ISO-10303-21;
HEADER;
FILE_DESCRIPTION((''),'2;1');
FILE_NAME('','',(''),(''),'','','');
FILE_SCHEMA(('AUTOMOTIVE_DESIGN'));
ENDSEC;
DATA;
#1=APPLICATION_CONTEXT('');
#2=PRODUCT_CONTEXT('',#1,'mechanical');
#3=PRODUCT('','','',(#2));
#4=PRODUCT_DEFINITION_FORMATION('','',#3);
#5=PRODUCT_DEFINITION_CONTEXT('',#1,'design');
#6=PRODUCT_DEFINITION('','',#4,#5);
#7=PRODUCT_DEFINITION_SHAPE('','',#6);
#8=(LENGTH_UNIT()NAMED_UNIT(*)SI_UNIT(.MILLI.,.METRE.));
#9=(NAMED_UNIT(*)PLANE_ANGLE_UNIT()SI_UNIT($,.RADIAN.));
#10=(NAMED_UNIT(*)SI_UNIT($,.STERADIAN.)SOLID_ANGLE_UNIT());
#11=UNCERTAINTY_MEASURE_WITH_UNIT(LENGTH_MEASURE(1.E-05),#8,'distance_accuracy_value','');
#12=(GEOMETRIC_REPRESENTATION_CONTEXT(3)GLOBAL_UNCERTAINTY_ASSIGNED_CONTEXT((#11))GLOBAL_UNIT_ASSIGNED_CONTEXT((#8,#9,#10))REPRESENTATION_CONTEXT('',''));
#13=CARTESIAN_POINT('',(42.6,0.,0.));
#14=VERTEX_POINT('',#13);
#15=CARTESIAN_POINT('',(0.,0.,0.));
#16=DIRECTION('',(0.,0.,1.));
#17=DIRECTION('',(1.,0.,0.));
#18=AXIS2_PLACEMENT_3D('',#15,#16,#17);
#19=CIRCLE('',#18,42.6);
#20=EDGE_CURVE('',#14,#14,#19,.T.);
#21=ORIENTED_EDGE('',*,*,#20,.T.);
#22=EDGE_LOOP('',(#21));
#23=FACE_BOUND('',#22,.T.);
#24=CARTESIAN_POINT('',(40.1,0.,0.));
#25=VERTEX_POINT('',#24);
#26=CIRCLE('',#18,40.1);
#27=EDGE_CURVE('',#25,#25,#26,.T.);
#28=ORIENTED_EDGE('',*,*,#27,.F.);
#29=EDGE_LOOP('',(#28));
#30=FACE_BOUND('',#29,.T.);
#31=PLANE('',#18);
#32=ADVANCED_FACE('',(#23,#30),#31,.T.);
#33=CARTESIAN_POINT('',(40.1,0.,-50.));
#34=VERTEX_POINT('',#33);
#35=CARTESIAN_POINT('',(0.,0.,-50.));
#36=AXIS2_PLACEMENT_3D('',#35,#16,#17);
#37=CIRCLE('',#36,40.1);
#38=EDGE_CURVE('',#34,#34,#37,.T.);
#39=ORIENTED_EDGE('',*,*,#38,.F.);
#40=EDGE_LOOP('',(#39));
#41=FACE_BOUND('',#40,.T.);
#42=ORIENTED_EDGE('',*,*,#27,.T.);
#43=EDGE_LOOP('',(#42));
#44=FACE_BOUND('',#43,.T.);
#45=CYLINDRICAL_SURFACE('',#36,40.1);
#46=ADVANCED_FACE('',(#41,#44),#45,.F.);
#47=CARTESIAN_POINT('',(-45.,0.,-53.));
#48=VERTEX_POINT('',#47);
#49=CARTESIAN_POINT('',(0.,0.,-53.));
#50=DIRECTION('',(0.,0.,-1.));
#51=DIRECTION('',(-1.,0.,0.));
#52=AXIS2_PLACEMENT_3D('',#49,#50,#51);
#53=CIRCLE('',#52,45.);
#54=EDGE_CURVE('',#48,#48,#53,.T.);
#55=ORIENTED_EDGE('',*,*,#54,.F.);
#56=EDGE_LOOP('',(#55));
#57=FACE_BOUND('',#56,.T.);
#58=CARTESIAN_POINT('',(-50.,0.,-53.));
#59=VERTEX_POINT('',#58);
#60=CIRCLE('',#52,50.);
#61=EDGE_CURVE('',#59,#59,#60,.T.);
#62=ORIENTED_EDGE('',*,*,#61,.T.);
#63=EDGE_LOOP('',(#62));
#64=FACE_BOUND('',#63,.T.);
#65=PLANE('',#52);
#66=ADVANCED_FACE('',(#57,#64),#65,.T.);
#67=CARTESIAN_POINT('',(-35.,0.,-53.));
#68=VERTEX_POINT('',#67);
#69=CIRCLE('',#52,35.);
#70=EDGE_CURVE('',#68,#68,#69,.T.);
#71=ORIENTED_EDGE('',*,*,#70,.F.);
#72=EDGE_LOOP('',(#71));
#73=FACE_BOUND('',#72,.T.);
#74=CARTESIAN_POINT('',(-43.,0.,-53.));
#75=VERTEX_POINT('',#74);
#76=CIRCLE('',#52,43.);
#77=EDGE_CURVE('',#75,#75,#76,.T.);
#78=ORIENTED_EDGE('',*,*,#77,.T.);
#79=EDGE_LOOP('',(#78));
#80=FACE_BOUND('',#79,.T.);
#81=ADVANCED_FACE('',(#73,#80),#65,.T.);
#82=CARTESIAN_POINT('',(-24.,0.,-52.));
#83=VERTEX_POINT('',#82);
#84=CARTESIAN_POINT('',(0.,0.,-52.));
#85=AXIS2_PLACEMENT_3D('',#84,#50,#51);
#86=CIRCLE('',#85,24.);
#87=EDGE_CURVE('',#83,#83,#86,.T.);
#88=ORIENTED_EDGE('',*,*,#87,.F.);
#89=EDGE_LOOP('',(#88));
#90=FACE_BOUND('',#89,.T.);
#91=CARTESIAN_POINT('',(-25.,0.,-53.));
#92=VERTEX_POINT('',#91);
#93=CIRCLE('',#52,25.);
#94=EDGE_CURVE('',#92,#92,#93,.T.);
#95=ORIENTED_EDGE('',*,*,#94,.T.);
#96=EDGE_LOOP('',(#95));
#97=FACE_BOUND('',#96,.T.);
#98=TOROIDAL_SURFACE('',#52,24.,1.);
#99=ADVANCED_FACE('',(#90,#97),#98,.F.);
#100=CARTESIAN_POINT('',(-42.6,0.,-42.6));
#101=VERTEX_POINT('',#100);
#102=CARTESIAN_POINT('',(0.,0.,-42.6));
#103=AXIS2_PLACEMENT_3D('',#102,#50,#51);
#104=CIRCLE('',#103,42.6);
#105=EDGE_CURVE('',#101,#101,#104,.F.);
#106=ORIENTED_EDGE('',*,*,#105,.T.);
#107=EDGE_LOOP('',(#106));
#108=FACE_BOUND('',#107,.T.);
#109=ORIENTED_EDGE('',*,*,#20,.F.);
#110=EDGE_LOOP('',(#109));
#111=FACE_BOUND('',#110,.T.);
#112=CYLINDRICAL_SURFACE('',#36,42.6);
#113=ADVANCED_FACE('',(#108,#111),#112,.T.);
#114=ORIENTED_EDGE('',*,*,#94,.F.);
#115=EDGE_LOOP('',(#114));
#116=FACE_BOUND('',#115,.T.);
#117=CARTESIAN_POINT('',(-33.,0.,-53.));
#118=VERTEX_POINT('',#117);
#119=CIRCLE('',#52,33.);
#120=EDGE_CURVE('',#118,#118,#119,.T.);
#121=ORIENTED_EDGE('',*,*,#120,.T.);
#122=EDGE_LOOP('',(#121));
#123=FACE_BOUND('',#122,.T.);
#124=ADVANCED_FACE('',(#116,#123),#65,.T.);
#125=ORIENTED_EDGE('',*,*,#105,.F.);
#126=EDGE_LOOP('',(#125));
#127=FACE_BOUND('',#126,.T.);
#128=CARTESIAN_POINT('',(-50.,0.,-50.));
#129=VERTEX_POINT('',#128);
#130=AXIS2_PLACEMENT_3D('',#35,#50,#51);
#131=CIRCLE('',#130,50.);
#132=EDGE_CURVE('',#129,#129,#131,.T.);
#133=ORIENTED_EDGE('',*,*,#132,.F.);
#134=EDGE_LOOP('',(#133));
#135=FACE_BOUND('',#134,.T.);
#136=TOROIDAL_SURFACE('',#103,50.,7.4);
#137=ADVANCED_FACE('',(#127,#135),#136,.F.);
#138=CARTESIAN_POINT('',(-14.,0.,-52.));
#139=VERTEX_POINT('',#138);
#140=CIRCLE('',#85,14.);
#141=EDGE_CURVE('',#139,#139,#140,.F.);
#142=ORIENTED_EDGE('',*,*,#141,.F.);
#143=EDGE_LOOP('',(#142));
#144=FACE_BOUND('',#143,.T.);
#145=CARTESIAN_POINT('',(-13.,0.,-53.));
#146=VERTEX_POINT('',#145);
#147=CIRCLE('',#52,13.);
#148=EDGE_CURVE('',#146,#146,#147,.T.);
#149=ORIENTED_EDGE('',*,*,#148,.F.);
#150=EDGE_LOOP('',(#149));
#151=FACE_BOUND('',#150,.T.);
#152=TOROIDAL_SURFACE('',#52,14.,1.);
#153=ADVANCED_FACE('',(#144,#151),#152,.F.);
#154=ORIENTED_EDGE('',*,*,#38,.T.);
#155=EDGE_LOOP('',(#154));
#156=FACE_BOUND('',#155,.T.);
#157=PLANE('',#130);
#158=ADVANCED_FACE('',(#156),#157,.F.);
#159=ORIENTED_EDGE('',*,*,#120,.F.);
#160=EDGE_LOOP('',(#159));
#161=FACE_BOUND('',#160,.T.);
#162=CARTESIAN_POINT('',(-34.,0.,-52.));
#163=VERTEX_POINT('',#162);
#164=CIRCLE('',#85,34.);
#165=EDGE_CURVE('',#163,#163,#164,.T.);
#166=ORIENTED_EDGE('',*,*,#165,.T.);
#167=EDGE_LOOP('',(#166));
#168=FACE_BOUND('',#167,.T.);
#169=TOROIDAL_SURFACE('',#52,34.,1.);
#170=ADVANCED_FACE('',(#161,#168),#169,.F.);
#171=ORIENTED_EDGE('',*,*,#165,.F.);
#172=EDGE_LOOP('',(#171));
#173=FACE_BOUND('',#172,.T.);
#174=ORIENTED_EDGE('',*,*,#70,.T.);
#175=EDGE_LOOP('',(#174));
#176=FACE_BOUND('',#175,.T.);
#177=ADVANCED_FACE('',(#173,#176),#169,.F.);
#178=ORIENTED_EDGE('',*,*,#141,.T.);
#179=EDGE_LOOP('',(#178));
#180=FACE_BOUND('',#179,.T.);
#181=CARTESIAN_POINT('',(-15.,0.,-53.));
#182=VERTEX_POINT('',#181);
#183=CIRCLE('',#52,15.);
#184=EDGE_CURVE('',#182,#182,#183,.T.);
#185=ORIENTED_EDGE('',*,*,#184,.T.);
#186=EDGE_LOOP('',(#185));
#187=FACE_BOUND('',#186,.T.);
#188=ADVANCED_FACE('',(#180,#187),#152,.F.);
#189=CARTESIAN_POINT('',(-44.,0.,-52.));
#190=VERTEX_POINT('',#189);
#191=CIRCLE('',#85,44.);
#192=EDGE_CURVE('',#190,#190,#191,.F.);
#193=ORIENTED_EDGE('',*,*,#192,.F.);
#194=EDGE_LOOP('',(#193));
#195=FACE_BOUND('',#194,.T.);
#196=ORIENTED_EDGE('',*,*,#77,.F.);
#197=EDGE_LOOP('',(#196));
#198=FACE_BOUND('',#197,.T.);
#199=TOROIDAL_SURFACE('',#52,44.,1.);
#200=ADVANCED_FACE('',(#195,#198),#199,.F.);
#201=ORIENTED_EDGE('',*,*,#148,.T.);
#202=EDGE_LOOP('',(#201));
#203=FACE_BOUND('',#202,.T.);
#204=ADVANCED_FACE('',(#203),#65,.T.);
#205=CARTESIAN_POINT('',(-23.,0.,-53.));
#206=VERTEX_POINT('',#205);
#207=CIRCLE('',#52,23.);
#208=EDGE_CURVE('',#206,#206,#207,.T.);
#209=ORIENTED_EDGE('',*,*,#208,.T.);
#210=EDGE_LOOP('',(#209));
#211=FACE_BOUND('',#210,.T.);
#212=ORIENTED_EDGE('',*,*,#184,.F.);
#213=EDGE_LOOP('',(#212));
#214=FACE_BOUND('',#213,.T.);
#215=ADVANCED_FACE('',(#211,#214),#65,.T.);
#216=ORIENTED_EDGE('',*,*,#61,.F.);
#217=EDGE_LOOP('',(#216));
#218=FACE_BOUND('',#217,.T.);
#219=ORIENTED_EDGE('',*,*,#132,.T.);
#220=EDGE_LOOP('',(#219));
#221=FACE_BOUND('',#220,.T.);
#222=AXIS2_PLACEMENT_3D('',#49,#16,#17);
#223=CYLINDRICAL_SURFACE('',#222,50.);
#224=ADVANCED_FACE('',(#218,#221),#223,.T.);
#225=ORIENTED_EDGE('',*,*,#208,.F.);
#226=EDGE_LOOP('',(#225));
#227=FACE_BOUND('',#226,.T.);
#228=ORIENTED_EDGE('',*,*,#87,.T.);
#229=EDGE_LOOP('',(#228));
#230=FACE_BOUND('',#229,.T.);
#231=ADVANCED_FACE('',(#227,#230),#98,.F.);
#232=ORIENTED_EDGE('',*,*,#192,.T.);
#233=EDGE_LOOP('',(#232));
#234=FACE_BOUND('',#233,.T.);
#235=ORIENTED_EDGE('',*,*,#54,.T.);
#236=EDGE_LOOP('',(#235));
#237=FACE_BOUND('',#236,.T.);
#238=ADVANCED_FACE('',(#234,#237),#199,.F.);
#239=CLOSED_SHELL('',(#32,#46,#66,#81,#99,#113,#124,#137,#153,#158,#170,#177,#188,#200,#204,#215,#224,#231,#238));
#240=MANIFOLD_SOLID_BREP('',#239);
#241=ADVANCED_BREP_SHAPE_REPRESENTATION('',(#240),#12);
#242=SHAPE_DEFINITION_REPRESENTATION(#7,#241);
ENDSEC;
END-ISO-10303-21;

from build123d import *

# Parameters (mm, degrees)
SKETCH2_R           = 42.6
SKETCH2_R_2         = 40.1
BOSS_EXTRUDE2_DEPTH = 50
SKETCH3_R           = 50
BOSS_EXTRUDE3_DEPTH = 3
SKETCH4_R           = 45
SKETCH4_R_2         = 43
SKETCH4_R_3         = 35
SKETCH4_R_4         = 33
SKETCH4_R_5         = 25
SKETCH4_R_6         = 23
SKETCH4_R_7         = 15
SKETCH4_R_8         = 13
CUT_EXTRUDE1_DEPTH  = 1
FILLET1_R           = 1
FILLET2_R           = 7.4


with BuildPart() as part:
    # Sketch2 → Boss-Extrude2 (new body)
    with BuildSketch(Plane.XY):
        Circle(SKETCH2_R)
        Circle(SKETCH2_R_2, mode=Mode.SUBTRACT)
    extrude(amount=-BOSS_EXTRUDE2_DEPTH)

    # Sketch3 → Boss-Extrude3 (add)
    with BuildSketch(Plane(origin=(0, 0, -50), x_dir=(-1, 0, 0), z_dir=(0, 0, -1))):
        Circle(SKETCH3_R)
    extrude(amount=BOSS_EXTRUDE3_DEPTH)

    # Sketch4 → Cut-Extrude1 (cut)
    # profile 1 of 4: a face of its own
    with BuildSketch(Plane(origin=(0, 0, -53), x_dir=(-1, 0, 0), z_dir=(0, 0, -1))):
        Circle(SKETCH4_R)
        Circle(SKETCH4_R_2, mode=Mode.SUBTRACT)
    # profile 2 of 4: a face of its own
    with BuildSketch(Plane(origin=(0, 0, -53), x_dir=(-1, 0, 0), z_dir=(0, 0, -1))):
        Circle(SKETCH4_R_3)
        Circle(SKETCH4_R_4, mode=Mode.SUBTRACT)
    # profile 3 of 4: a face of its own
    with BuildSketch(Plane(origin=(0, 0, -53), x_dir=(-1, 0, 0), z_dir=(0, 0, -1))):
        Circle(SKETCH4_R_5)
        Circle(SKETCH4_R_6, mode=Mode.SUBTRACT)
    # profile 4 of 4: a face of its own
    with BuildSketch(Plane(origin=(0, 0, -53), x_dir=(-1, 0, 0), z_dir=(0, 0, -1))):
        Circle(SKETCH4_R_7)
        Circle(SKETCH4_R_8, mode=Mode.SUBTRACT)
    extrude(amount=-CUT_EXTRUDE1_DEPTH, mode=Mode.SUBTRACT)

    # Fillet1
    fillet1_edges = [part.edges().sort_by_distance(p)[0] for p in [
        (15, 0, -52),
        (13, 0, -52),
        (25, 0, -52),
        (23, 0, -52),
        (45, 0, -52),
        (43, 0, -52),
        (35, 0, -52),
        (33, 0, -52),
    ]]
    fillet(fillet1_edges, radius=FILLET1_R - 0.0001)  # a hair under: the kernel refuses the full size

    # Fillet2
    fillet2_edges = [part.edges().sort_by_distance(p)[0] for p in [
        (-42.6, 0, -50),
    ]]
    fillet(fillet2_edges, radius=FILLET2_R - 0.0001)  # a hair under: the kernel refuses the full size


solid = part.part
